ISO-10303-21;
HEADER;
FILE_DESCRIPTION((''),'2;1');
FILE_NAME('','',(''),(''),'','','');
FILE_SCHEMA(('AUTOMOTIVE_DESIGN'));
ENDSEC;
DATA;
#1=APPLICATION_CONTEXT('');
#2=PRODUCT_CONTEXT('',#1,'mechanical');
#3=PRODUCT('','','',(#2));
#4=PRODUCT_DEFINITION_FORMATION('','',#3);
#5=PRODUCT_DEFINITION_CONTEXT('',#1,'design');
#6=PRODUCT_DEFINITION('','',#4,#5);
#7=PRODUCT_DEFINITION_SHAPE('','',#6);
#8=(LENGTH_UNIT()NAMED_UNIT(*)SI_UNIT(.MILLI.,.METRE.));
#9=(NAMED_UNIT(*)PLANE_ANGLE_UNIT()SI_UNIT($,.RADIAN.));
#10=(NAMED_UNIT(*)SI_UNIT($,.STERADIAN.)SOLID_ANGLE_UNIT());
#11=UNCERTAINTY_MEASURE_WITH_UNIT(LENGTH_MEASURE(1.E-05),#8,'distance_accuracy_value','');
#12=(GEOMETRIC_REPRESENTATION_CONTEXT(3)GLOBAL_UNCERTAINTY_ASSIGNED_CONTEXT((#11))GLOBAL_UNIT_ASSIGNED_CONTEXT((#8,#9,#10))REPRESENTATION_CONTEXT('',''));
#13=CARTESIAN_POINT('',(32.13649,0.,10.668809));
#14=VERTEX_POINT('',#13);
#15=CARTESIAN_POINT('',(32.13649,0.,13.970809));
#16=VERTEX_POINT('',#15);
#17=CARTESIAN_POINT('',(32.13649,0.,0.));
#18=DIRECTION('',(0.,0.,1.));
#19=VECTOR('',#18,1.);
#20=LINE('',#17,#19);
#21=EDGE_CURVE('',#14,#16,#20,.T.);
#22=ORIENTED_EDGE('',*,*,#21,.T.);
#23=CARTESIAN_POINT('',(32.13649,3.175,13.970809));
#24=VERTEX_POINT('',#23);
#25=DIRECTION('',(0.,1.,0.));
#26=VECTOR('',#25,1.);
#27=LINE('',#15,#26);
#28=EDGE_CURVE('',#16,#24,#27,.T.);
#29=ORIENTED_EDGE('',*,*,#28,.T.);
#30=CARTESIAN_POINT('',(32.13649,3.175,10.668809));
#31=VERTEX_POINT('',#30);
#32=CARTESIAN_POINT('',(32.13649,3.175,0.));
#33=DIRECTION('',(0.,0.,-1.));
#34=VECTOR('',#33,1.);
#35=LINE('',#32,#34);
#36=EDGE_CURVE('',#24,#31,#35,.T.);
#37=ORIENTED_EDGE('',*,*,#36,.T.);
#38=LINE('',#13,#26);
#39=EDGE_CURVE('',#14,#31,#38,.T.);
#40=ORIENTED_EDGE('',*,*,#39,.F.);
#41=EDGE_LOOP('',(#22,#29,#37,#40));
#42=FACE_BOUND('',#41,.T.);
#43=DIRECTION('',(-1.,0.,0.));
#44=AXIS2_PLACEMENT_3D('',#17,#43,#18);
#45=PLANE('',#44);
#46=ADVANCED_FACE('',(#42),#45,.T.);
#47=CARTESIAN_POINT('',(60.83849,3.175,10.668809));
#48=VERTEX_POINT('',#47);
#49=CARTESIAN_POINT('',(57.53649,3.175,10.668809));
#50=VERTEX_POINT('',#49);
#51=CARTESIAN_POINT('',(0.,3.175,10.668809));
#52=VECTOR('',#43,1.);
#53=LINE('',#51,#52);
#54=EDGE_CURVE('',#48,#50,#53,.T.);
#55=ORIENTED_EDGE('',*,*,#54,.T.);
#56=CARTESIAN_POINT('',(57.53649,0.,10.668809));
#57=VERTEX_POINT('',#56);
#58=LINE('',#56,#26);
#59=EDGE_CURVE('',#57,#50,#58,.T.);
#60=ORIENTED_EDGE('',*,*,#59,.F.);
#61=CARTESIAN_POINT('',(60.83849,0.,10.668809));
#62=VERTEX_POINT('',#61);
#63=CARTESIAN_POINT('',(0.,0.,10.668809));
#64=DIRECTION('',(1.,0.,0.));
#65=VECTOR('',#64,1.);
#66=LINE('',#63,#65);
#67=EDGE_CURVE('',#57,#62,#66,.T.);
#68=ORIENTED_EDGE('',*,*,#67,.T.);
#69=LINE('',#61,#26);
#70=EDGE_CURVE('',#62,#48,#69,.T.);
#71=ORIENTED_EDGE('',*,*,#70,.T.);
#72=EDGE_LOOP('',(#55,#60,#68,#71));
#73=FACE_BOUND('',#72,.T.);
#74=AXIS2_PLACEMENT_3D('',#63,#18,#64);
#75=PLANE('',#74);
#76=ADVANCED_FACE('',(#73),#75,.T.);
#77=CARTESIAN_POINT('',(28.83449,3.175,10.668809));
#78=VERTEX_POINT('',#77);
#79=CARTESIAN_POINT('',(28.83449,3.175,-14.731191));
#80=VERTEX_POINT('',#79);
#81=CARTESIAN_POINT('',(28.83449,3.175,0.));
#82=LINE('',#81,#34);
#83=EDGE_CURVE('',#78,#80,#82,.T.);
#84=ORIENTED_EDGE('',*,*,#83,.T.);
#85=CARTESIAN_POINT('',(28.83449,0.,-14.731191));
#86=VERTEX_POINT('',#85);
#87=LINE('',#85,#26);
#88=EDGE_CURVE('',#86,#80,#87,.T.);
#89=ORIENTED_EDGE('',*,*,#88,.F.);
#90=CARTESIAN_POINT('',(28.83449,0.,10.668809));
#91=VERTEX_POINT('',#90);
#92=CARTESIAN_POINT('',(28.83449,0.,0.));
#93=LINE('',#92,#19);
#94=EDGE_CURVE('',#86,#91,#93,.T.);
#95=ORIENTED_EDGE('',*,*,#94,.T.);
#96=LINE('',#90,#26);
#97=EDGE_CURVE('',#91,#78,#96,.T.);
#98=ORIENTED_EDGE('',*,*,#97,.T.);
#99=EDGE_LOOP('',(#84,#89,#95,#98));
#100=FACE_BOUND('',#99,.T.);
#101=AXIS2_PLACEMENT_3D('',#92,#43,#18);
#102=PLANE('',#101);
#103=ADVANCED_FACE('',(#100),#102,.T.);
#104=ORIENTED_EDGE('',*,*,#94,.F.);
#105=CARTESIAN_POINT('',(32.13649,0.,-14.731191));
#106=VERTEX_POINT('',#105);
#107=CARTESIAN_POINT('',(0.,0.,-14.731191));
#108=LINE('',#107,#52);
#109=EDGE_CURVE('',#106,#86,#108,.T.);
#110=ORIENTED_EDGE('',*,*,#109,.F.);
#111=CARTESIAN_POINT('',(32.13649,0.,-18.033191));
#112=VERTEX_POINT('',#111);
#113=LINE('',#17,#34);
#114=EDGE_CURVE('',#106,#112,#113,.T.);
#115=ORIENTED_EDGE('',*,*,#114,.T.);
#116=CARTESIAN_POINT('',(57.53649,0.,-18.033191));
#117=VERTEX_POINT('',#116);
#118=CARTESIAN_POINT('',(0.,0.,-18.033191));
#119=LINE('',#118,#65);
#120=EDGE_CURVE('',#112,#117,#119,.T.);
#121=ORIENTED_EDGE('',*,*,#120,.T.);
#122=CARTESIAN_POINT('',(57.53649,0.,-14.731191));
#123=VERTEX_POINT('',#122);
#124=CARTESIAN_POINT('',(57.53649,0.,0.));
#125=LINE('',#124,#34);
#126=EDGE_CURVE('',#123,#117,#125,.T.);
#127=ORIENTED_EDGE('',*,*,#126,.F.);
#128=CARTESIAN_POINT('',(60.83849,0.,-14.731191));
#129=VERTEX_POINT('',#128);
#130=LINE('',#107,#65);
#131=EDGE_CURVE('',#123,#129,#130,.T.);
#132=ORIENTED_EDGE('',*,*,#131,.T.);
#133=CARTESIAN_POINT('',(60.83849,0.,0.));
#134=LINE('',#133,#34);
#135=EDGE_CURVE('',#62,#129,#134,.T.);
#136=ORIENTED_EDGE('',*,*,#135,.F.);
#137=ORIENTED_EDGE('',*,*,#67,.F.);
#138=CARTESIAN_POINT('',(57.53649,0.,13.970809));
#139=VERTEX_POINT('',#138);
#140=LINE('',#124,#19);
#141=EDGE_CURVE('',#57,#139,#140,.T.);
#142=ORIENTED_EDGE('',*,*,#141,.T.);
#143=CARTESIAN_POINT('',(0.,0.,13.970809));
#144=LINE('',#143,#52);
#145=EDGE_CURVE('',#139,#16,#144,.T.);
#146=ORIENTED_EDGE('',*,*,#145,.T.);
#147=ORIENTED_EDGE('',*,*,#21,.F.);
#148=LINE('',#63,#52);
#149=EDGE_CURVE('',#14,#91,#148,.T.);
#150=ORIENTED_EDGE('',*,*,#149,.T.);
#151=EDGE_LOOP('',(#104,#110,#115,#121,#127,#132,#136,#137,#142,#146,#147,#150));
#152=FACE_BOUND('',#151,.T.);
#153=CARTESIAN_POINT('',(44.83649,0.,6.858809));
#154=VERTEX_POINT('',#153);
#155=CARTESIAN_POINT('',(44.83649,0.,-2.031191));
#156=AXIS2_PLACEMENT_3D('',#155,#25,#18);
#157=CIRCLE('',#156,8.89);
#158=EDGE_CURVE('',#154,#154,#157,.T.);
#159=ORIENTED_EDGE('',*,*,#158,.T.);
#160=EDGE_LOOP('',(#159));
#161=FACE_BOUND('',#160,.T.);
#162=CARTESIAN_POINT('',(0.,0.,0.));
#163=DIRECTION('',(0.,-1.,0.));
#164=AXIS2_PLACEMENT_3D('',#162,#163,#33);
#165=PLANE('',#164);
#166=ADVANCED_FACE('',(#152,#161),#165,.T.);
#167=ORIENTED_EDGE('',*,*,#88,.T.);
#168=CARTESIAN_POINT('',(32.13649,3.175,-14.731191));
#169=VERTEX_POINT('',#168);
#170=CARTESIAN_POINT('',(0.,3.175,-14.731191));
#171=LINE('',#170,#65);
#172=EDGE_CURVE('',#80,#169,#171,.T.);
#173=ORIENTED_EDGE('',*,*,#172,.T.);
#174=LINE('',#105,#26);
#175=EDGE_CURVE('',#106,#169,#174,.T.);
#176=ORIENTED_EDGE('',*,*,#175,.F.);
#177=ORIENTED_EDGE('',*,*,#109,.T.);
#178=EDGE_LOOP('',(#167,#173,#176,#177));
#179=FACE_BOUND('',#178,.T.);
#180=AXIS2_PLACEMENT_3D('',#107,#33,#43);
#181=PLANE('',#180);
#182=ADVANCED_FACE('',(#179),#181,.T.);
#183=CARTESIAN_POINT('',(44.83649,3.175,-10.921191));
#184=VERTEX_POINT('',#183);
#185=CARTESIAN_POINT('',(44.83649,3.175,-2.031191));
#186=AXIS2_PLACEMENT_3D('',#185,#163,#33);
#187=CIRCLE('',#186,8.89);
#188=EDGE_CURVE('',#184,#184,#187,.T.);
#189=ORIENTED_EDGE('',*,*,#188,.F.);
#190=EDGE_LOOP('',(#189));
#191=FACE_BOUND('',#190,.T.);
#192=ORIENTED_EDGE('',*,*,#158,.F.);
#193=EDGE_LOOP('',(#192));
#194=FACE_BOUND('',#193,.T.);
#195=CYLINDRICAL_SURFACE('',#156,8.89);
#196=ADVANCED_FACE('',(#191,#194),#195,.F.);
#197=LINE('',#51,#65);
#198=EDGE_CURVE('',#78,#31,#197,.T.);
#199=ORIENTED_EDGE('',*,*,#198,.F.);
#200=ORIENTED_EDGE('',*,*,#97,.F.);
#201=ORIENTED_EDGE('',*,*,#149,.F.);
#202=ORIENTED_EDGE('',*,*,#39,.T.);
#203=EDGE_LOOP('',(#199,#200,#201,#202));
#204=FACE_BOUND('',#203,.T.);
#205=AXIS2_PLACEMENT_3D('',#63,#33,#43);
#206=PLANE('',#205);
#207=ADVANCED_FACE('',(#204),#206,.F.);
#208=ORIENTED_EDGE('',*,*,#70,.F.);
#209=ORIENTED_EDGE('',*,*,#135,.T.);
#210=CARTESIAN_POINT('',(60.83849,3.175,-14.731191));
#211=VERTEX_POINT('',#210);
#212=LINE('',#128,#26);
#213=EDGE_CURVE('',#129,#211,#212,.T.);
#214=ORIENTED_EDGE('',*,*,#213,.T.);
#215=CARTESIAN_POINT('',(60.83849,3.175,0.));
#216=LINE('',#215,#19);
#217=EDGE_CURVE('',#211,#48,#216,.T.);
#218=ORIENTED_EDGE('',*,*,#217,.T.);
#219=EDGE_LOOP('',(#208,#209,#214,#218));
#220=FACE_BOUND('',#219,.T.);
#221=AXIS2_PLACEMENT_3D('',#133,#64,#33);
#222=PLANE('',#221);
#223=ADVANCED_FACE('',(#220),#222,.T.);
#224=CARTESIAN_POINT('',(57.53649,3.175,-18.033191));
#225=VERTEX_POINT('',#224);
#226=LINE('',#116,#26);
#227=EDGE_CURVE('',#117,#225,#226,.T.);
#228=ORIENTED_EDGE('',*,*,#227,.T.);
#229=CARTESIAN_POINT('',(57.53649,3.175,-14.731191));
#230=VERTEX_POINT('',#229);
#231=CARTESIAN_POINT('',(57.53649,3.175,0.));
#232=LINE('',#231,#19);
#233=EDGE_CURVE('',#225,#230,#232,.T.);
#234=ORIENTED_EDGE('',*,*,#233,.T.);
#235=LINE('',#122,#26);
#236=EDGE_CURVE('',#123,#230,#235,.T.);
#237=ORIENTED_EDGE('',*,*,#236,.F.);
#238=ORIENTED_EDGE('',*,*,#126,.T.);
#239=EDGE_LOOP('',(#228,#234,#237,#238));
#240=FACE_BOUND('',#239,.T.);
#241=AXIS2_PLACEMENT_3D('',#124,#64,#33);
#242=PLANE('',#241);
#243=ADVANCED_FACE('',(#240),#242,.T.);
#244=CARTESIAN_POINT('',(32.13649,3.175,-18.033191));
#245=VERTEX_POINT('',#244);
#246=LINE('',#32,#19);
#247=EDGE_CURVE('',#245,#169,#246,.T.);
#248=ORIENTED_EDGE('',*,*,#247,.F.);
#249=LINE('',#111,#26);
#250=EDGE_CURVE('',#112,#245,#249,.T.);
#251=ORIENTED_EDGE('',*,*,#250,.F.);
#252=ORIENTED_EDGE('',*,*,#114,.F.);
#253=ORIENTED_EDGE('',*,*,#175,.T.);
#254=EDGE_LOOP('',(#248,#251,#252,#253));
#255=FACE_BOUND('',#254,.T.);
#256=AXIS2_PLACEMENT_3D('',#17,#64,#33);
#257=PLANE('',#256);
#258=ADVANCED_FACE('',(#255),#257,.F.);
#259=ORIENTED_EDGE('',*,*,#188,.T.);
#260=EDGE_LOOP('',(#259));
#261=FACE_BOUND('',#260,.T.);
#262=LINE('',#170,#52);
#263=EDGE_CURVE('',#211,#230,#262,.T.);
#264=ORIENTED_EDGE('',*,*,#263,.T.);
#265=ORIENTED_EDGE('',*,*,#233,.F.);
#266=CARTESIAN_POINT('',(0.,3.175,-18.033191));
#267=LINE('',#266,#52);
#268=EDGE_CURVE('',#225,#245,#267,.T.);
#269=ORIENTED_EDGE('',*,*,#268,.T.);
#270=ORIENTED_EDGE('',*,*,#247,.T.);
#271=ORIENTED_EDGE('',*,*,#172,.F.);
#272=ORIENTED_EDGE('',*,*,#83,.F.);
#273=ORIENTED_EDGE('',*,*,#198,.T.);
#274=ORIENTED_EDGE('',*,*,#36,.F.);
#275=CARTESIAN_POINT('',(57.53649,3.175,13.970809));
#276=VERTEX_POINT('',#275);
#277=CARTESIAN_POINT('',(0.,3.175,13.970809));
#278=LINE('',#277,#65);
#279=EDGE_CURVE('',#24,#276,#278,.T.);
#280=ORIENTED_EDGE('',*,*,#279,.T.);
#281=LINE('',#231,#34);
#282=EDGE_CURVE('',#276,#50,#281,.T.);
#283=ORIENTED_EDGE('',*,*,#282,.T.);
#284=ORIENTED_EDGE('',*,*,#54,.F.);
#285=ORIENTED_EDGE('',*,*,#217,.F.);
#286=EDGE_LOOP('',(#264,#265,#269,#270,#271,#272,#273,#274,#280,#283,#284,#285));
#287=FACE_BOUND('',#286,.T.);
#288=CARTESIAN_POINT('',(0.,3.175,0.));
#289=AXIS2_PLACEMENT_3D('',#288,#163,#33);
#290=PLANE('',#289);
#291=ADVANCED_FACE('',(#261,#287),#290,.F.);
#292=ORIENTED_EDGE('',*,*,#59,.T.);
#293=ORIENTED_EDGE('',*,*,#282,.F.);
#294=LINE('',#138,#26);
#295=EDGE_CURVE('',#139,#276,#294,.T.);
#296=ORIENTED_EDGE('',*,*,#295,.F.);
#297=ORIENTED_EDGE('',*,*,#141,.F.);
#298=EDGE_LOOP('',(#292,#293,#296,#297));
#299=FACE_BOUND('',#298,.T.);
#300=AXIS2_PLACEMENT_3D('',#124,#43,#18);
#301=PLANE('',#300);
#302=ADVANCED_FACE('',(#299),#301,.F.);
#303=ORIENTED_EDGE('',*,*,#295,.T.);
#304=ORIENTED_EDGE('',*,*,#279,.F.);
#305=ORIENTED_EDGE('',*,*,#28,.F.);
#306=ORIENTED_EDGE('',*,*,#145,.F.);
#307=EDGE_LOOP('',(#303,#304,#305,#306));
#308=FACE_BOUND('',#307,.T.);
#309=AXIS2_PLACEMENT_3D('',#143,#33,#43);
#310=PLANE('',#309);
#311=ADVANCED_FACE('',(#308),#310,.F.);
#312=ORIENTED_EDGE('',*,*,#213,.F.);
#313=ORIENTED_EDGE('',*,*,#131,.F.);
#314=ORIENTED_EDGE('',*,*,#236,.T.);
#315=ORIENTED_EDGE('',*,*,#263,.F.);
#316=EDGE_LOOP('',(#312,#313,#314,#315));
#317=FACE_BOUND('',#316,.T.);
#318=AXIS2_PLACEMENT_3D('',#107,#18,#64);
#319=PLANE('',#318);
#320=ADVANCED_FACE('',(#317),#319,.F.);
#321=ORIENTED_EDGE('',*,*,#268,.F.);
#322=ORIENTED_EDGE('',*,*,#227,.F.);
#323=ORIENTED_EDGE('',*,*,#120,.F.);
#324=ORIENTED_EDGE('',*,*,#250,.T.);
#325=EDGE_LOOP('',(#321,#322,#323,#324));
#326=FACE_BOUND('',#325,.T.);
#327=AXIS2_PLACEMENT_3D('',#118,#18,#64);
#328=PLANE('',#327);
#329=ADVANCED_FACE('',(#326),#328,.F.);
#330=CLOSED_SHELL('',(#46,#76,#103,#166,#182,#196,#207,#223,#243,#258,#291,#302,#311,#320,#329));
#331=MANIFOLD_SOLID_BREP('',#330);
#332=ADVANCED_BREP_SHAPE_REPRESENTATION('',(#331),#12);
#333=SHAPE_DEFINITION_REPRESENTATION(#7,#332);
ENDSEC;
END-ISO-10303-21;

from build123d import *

# Parameters (mm, degrees)
SKETCH2_W                    = 304.8
SKETCH2_H                    = 304.8
BOSS_EXTRUDE1_DEPTH          = 3.175
CUT_EXTRUDE1_DEPTH           = 348.408852067
CUT_EXTRUDE1_DEPTH_BACK      = 348.408852067
SKETCH3_W                    = 304.8
SKETCH3_H                    = 304.8
SKETCH3_R                    = 12.7
SKETCH3_R_2                  = 8.89
BODY_DELETE_KEEP_1_OUTLINE_R = 12.7
BODY_DELETE_KEEP_1_DEPTH     = 3.175


# Read off the part's stored shape, not the designer's step: Body-Delete/Keep 1
with BuildPart() as part:
    # Sketch2 → Boss-Extrude1 (new body)
    with BuildSketch(Plane(origin=(0, 0, 0), x_dir=(1, 0, 0), z_dir=(0, 1, 0))):
        with Locations((-56.763509666, -124.968808797)):
            Rectangle(SKETCH2_W, SKETCH2_H)
    extrude(amount=BOSS_EXTRUDE1_DEPTH)

    # Sketch3 → Cut-Extrude1 (cut, two sides: drawn at the far end of the back side and taken through both)
    # profile 1 of 3: a face of its own
    with BuildSketch(Plane(origin=(0, 3.175, 0), x_dir=(1, 0, 0), z_dir=(0, 1, 0)).offset(-CUT_EXTRUDE1_DEPTH_BACK)):
        with Locations((-56.763509666, -124.968808797)):
            Rectangle(SKETCH3_W, SKETCH3_H)
        Polygon((-188.253637726, -268.695366412), (-192.063637726, -268.695366412), (-192.063637726, -265.393366412), (-198.413637726, -265.393366412), (-188.253637726, -205.195366412), align=None, mode=Mode.SUBTRACT)
        Polygon((-185.713637726, -265.393366412), (-175.553637726, -205.195366412), (-175.553637726, -268.695366412), (-179.363637726, -268.695366412), (-179.363637726, -265.393366412), align=None, mode=Mode.SUBTRACT)
        Polygon((-162.853637726, -268.695366412), (-166.663637726, -268.695366412), (-166.663637726, -265.393366412), (-173.013637726, -265.393366412), (-162.853637726, -205.195366412), align=None, mode=Mode.SUBTRACT)
        Polygon((-150.153637726, -268.695366412), (-153.963637726, -268.695366412), (-153.963637726, -265.393366412), (-160.313637726, -265.393366412), (-150.153637726, -205.195366412), align=None, mode=Mode.SUBTRACT)
        Polygon((-147.613637726, -265.393366412), (-137.453637726, -205.195366412), (-137.453637726, -268.695366412), (-141.263637726, -268.695366412), (-141.263637726, -265.393366412), align=None, mode=Mode.SUBTRACT)
        Polygon((-128.563637726, -265.393366412), (-134.913637726, -265.393366412), (-124.753637726, -205.195366412), (-124.753637726, -268.695366412), (-128.563637726, -268.695366412), align=None, mode=Mode.SUBTRACT)
        Polygon((-122.213637726, -265.393366412), (-112.053637726, -205.195366412), (-112.053637726, -268.695366412), (-115.863637726, -268.695366412), (-115.863637726, -265.393366412), align=None, mode=Mode.SUBTRACT)
        Polygon((-99.353637726, -268.695366412), (-103.163637726, -268.695366412), (-103.163637726, -265.393366412), (-109.513637726, -265.393366412), (-99.353637726, -205.195366412), align=None, mode=Mode.SUBTRACT)
        Polygon((-90.463637726, -268.695366412), (-90.463637726, -265.393366412), (-96.813637726, -265.393366412), (-86.653637726, -205.195366412), (-86.653637726, -268.695366412), align=None, mode=Mode.SUBTRACT)
        Polygon((-84.113637726, -265.393366412), (-73.953637726, -205.195366412), (-73.953637726, -268.695366412), (-77.763637726, -268.695366412), (-77.763637726, -265.393366412), align=None, mode=Mode.SUBTRACT)
        Polygon((-71.413637726, -265.393366412), (-61.253637726, -205.195366412), (-61.253637726, -268.695366412), (-65.063637726, -268.695366412), (-65.063637726, -265.393366412), align=None, mode=Mode.SUBTRACT)
        with BuildLine():
            ThreePointArc((-132.963509666, -135.600090559), (-133.446874634, -138.030130355), (-134.823381605, -140.09021862))
            Line((-134.823381605, -140.09021862), (-188.253637726, -193.520474741))
            ThreePointArc((-188.253637726, -193.520474741), (-190.313725991, -194.896981712), (-192.743765787, -195.38034668))
            Line((-192.743765787, -195.38034668), (-196.463509666, -195.38034668))
            Line((-196.463509666, -195.38034668), (-196.463509666, -131.88034668))
            Line((-196.463509666, -131.88034668), (-132.963509666, -131.88034668))
            Line((-132.963509666, -131.88034668), (-132.963509666, -135.600090559))
        make_face(mode=Mode.SUBTRACT)
        with BuildLine():
            Line((-126.613509666, -195.38034668), (-126.613509666, -131.88034668))
            Line((-126.613509666, -131.88034668), (-63.113509666, -131.88034668))
            Line((-63.113509666, -131.88034668), (-63.113509666, -135.600090559))
            ThreePointArc((-63.113509666, -135.600090559), (-63.596874634, -138.030130355), (-64.973381605, -140.09021862))
            Line((-64.973381605, -140.09021862), (-118.403637726, -193.520474741))
            ThreePointArc((-118.403637726, -193.520474741), (-120.463725991, -194.896981712), (-122.893765787, -195.38034668))
            Line((-122.893765787, -195.38034668), (-126.613509666, -195.38034668))
        make_face(mode=Mode.SUBTRACT)
        Polygon((-52.363637726, -268.695366412), (-52.363637726, -265.393366412), (-58.713637726, -265.393366412), (-48.553637726, -205.195366412), (-48.553637726, -268.695366412), align=None, mode=Mode.SUBTRACT)
        Polygon((-35.853637726, -205.195366412), (-35.853637726, -268.695366412), (-39.663637726, -268.695366412), (-39.663637726, -265.393366412), (-46.013637726, -265.393366412), align=None, mode=Mode.SUBTRACT)
        Polygon((-23.153637726, -205.195366412), (-23.153637726, -268.695366412), (-26.963637726, -268.695366412), (-26.963637726, -265.393366412), (-33.313637726, -265.393366412), align=None, mode=Mode.SUBTRACT)
        Polygon((-20.613637726, -265.393366412), (-10.453637726, -205.195366412), (-10.453637726, -268.695366412), (-14.263637726, -268.695366412), (-14.263637726, -265.393366412), align=None, mode=Mode.SUBTRACT)
        Polygon((-1.563637726, -268.695366412), (-1.563637726, -265.393366412), (-7.913637726, -265.393366412), (2.246362274, -205.195366412), (2.246362274, -268.695366412), align=None, mode=Mode.SUBTRACT)
        with BuildLine():
            Line((-53.043765787, -195.38034668), (-56.763509666, -195.38034668))
            Line((-56.763509666, -195.38034668), (-56.763509666, -131.88034668))
            Line((-56.763509666, -131.88034668), (6.736490334, -131.88034668))
            Line((6.736490334, -131.88034668), (6.736490334, -135.600090559))
            ThreePointArc((6.736490334, -135.600090559), (6.253125366, -138.030130355), (4.876618395, -140.09021862))
            Line((4.876618395, -140.09021862), (-48.553637726, -193.520474741))
            ThreePointArc((-48.553637726, -193.520474741), (-50.613725991, -194.896981712), (-53.043765787, -195.38034668))
        make_face(mode=Mode.SUBTRACT)
        with BuildLine():
            Line((13.086490334, -131.88034668), (76.586490334, -131.88034668))
            Line((76.586490334, -131.88034668), (76.586490334, -135.600090559))
            ThreePointArc((76.586490334, -135.600090559), (76.103125366, -138.030130355), (74.726618395, -140.09021862))
            Line((74.726618395, -140.09021862), (21.296362274, -193.520474741))
            ThreePointArc((21.296362274, -193.520474741), (19.236274009, -194.896981712), (16.806234213, -195.38034668))
            Line((16.806234213, -195.38034668), (13.086490334, -195.38034668))
            Line((13.086490334, -195.38034668), (13.086490334, -131.88034668))
        make_face(mode=Mode.SUBTRACT)
        with BuildLine():
            Line((-196.463509666, -125.53034668), (-196.463509666, -62.03034668))
            Line((-196.463509666, -62.03034668), (-132.963509666, -62.03034668))
            Line((-132.963509666, -62.03034668), (-132.963509666, -65.750090559))
            ThreePointArc((-132.963509666, -65.750090559), (-133.10773728, -67.095783354), (-133.533868437, -68.38034668))
            ThreePointArc((-133.533868437, -68.38034668), (-134.095097913, -69.368194866), (-134.823381605, -70.24021862))
            Line((-134.823381605, -70.24021862), (-188.253637726, -123.670474741))
            ThreePointArc((-188.253637726, -123.670474741), (-189.12566148, -124.398758433), (-190.113509666, -124.959987909))
            ThreePointArc((-190.113509666, -124.959987909), (-191.398072992, -125.386119066), (-192.743765787, -125.53034668))
            Line((-192.743765787, -125.53034668), (-196.463509666, -125.53034668))
        make_face(mode=Mode.SUBTRACT)
        with BuildLine():
            Line((-122.893765787, -125.53034668), (-126.613509666, -125.53034668))
            Line((-126.613509666, -125.53034668), (-126.613509666, -62.03034668))
            Line((-126.613509666, -62.03034668), (-63.113509666, -62.03034668))
            Line((-63.113509666, -62.03034668), (-63.113509666, -65.750090559))
            ThreePointArc((-63.113509666, -65.750090559), (-63.596874634, -68.180130355), (-64.973381605, -70.24021862))
            Line((-64.973381605, -70.24021862), (-118.403637726, -123.670474741))
            ThreePointArc((-118.403637726, -123.670474741), (-120.463725991, -125.046981712), (-122.893765787, -125.53034668))
        make_face(mode=Mode.SUBTRACT)
        Polygon((-196.463509666, -48.768808797), (-196.463509666, 14.731191203), (-192.653509666, 14.731191203), (-192.653509666, 11.429191203), (-186.303509666, 11.429191203), align=None, mode=Mode.SUBTRACT)
        Polygon((-183.763509666, 14.731191203), (-179.953509666, 14.731191203), (-179.953509666, 11.429191203), (-173.603509666, 11.429191203), (-183.763509666, -48.768808797), align=None, mode=Mode.SUBTRACT)
        Polygon((-171.063509666, 14.731191203), (-167.253509666, 14.731191203), (-167.253509666, 11.429191203), (-160.903509666, 11.429191203), (-171.063509666, -48.768808797), align=None, mode=Mode.SUBTRACT)
        Polygon((-158.363509666, 14.731191203), (-154.553509666, 14.731191203), (-154.553509666, 11.429191203), (-148.203509666, 11.429191203), (-158.363509666, -48.768808797), align=None, mode=Mode.SUBTRACT)
        Polygon((-145.663509666, 14.731191203), (-141.853509666, 14.731191203), (-141.853509666, 11.429191203), (-135.503509666, 11.429191203), (-145.663509666, -48.768808797), align=None, mode=Mode.SUBTRACT)
        Polygon((-132.963509666, 14.731191203), (-129.153509666, 14.731191203), (-129.153509666, 11.429191203), (-122.803509666, 11.429191203), (-132.963509666, -48.768808797), align=None, mode=Mode.SUBTRACT)
        Polygon((-120.263509666, 14.731191203), (-116.453509666, 14.731191203), (-116.453509666, 11.429191203), (-110.103509666, 11.429191203), (-120.263509666, -48.768808797), align=None, mode=Mode.SUBTRACT)
        Polygon((-107.563509666, 14.731191203), (-103.753509666, 14.731191203), (-103.753509666, 11.429191203), (-97.403509666, 11.429191203), (-107.563509666, -48.768808797), align=None, mode=Mode.SUBTRACT)
        Polygon((-94.863509666, 14.731191203), (-91.053509666, 14.731191203), (-91.053509666, 11.429191203), (-84.703509666, 11.429191203), (-94.863509666, -48.768808797), align=None, mode=Mode.SUBTRACT)
        Polygon((-82.163509666, 14.731191203), (-78.353509666, 14.731191203), (-78.353509666, 11.429191203), (-72.003509666, 11.429191203), (-82.163509666, -48.768808797), align=None, mode=Mode.SUBTRACT)
        Polygon((-69.463509666, 14.731191203), (-65.653509666, 14.731191203), (-65.653509666, 11.429191203), (-59.303509666, 11.429191203), (-69.463509666, -48.768808797), align=None, mode=Mode.SUBTRACT)
        with BuildLine():
            Line((-53.043765787, -125.53034668), (-56.763509666, -125.53034668))
            Line((-56.763509666, -125.53034668), (-56.763509666, -62.03034668))
            Line((-56.763509666, -62.03034668), (6.736490334, -62.03034668))
            Line((6.736490334, -62.03034668), (6.736490334, -65.750090559))
            ThreePointArc((6.736490334, -65.750090559), (6.253125366, -68.180130355), (4.876618395, -70.24021862))
            Line((4.876618395, -70.24021862), (-48.553637726, -123.670474741))
            ThreePointArc((-48.553637726, -123.670474741), (-50.613725991, -125.046981712), (-53.043765787, -125.53034668))
        make_face(mode=Mode.SUBTRACT)
        with BuildLine():
            Line((16.806234213, -125.53034668), (13.086490334, -125.53034668))
            Line((13.086490334, -125.53034668), (13.086490334, -62.03034668))
            Line((13.086490334, -62.03034668), (76.586490334, -62.03034668))
            Line((76.586490334, -62.03034668), (76.586490334, -65.750090559))
            ThreePointArc((76.586490334, -65.750090559), (76.103125366, -68.180130355), (74.726618395, -70.24021862))
            Line((74.726618395, -70.24021862), (21.296362274, -123.670474741))
            ThreePointArc((21.296362274, -123.670474741), (19.236274009, -125.046981712), (16.806234213, -125.53034668))
        make_face(mode=Mode.SUBTRACT)
        Polygon((-56.763509666, 14.731191203), (-52.953509666, 14.731191203), (-52.953509666, 11.429191203), (-46.603509666, 11.429191203), (-56.763509666, -48.768808797), align=None, mode=Mode.SUBTRACT)
        Polygon((-44.063509666, 14.731191203), (-40.253509666, 14.731191203), (-40.253509666, 11.429191203), (-33.903509666, 11.429191203), (-44.063509666, -48.768808797), align=None, mode=Mode.SUBTRACT)
        Polygon((-31.363509666, 14.731191203), (-27.553509666, 14.731191203), (-27.553509666, 11.429191203), (-21.203509666, 11.429191203), (-31.363509666, -48.768808797), align=None, mode=Mode.SUBTRACT)
        Polygon((-18.663509666, 14.731191203), (-14.853509666, 14.731191203), (-14.853509666, 11.429191203), (-8.503509666, 11.429191203), (-18.663509666, -48.768808797), align=None, mode=Mode.SUBTRACT)
        Polygon((-5.963509666, 14.731191203), (-2.153509666, 14.731191203), (-2.153509666, 11.429191203), (4.196490334, 11.429191203), (-5.963509666, -48.768808797), align=None, mode=Mode.SUBTRACT)
        Polygon((57.536490334, -48.768808797), (57.536490334, -52.070808797), (32.136490334, -52.070808797), (32.136490334, -48.768808797), (28.834490334, -48.768808797), (28.834490334, -23.368808797), (32.136490334, -23.368808797), (32.136490334, -20.066808797), (57.536490334, -20.066808797), (57.536490334, -23.368808797), (60.838490334, -23.368808797), (60.838490334, -48.768808797), align=None, mode=Mode.SUBTRACT)
        Polygon((28.834490334, 14.731191203), (32.136490334, 14.731191203), (32.136490334, 18.033191203), (57.536490334, 18.033191203), (57.536490334, 14.731191203), (60.838490334, 14.731191203), (60.838490334, -10.668808797), (57.536490334, -10.668808797), (57.536490334, -13.970808797), (32.136490334, -13.970808797), (32.136490334, -10.668808797), (28.834490334, -10.668808797), align=None, mode=Mode.SUBTRACT)
    # profile 2 of 3: a face of its own
    with BuildSketch(Plane(origin=(0, 3.175, 0), x_dir=(1, 0, 0), z_dir=(0, 1, 0)).offset(-CUT_EXTRUDE1_DEPTH_BACK)):
        with Locations(Location((44.836490334, -36.068808797, 0), (0, 0, 270))):
            Circle(SKETCH3_R)
    # profile 3 of 3: a face of its own
    with BuildSketch(Plane(origin=(0, 3.175, 0), x_dir=(1, 0, 0), z_dir=(0, 1, 0)).offset(-CUT_EXTRUDE1_DEPTH_BACK)):
        with Locations(Location((44.836490334, 2.031191203, 0), (0, 0, 270))):
            Circle(SKETCH3_R_2)
    extrude(amount=CUT_EXTRUDE1_DEPTH + CUT_EXTRUDE1_DEPTH_BACK, mode=Mode.SUBTRACT)

    # Body-Delete/Keep 1 outline → Body-Delete/Keep 1 (cut)
    # profile 1 of 41: a face of its own
    with BuildSketch(Plane(origin=(0, 0, 0), x_dir=(1, 0, 0), z_dir=(0, 1, 0))):
        Polygon((60.838490334, -23.368808797), (57.536490334, -23.368808797), (57.536490334, -20.066808797), (32.136490334, -20.066808797), (32.136490334, -23.368808797), (28.834490334, -23.368808797), (28.834490334, -48.768808797), (32.136490334, -48.768808797), (32.136490334, -52.070808797), (57.536490334, -52.070808797), (57.536490334, -48.768808797), (60.838490334, -48.768808797), align=None)
        with Locations((44.836490334, -36.068808797)):
            Circle(BODY_DELETE_KEEP_1_OUTLINE_R, mode=Mode.SUBTRACT)
    # profile 2 of 41: a face of its own
    with BuildSketch(Plane(origin=(0, 0, 0), x_dir=(1, 0, 0), z_dir=(0, 1, 0))):
        Polygon((-192.653509666, 11.429191203), (-192.653509666, 14.731191203), (-196.463509666, 14.731191203), (-196.463509666, -48.768808797), (-186.303509666, 11.429191203), align=None)
    # profile 3 of 41: a face of its own
    with BuildSketch(Plane(origin=(0, 0, 0), x_dir=(1, 0, 0), z_dir=(0, 1, 0))):
        Polygon((-2.153509666, 11.429191203), (-2.153509666, 14.731191203), (-5.963509666, 14.731191203), (-5.963509666, -48.768808797), (4.196490334, 11.429191203), align=None)
    # profile 4 of 41: a face of its own
    with BuildSketch(Plane(origin=(0, 0, 0), x_dir=(1, 0, 0), z_dir=(0, 1, 0))):
        Polygon((-27.553509666, 11.429191203), (-27.553509666, 14.731191203), (-31.363509666, 14.731191203), (-31.363509666, -48.768808797), (-21.203509666, 11.429191203), align=None)
    # profile 5 of 41: a face of its own
    with BuildSketch(Plane(origin=(0, 0, 0), x_dir=(1, 0, 0), z_dir=(0, 1, 0))):
        Polygon((-14.853509666, 11.429191203), (-14.853509666, 14.731191203), (-18.663509666, 14.731191203), (-18.663509666, -48.768808797), (-8.503509666, 11.429191203), align=None)
    # profile 6 of 41: a face of its own
    with BuildSketch(Plane(origin=(0, 0, 0), x_dir=(1, 0, 0), z_dir=(0, 1, 0))):
        Polygon((-65.653509666, 11.429191203), (-65.653509666, 14.731191203), (-69.463509666, 14.731191203), (-69.463509666, -48.768808797), (-59.303509666, 11.429191203), align=None)
    # profile 7 of 41: a face of its own
    with BuildSketch(Plane(origin=(0, 0, 0), x_dir=(1, 0, 0), z_dir=(0, 1, 0))):
        Polygon((-91.053509666, 11.429191203), (-91.053509666, 14.731191203), (-94.863509666, 14.731191203), (-94.863509666, -48.768808797), (-84.703509666, 11.429191203), align=None)
    # profile 8 of 41: a face of its own
    with BuildSketch(Plane(origin=(0, 0, 0), x_dir=(1, 0, 0), z_dir=(0, 1, 0))):
        Polygon((-40.253509666, 11.429191203), (-40.253509666, 14.731191203), (-44.063509666, 14.731191203), (-44.063509666, -48.768808797), (-33.903509666, 11.429191203), align=None)
    # profile 9 of 41: a face of its own
    with BuildSketch(Plane(origin=(0, 0, 0), x_dir=(1, 0, 0), z_dir=(0, 1, 0))):
        Polygon((-52.953509666, 11.429191203), (-52.953509666, 14.731191203), (-56.763509666, 14.731191203), (-56.763509666, -48.768808797), (-46.603509666, 11.429191203), align=None)
    # profile 10 of 41: a face of its own
    with BuildSketch(Plane(origin=(0, 0, 0), x_dir=(1, 0, 0), z_dir=(0, 1, 0))):
        Polygon((-141.853509666, 11.429191203), (-141.853509666, 14.731191203), (-145.663509666, 14.731191203), (-145.663509666, -48.768808797), (-135.503509666, 11.429191203), align=None)
    # profile 11 of 41: a face of its own
    with BuildSketch(Plane(origin=(0, 0, 0), x_dir=(1, 0, 0), z_dir=(0, 1, 0))):
        Polygon((-154.553509666, 11.429191203), (-154.553509666, 14.731191203), (-158.363509666, 14.731191203), (-158.363509666, -48.768808797), (-148.203509666, 11.429191203), align=None)
    # profile 12 of 41: a face of its own
    with BuildSketch(Plane(origin=(0, 0, 0), x_dir=(1, 0, 0), z_dir=(0, 1, 0))):
        Polygon((-167.253509666, 11.429191203), (-167.253509666, 14.731191203), (-171.063509666, 14.731191203), (-171.063509666, -48.768808797), (-160.903509666, 11.429191203), align=None)
    # profile 13 of 41: a face of its own
    with BuildSketch(Plane(origin=(0, 0, 0), x_dir=(1, 0, 0), z_dir=(0, 1, 0))):
        Polygon((-78.353509666, 11.429191203), (-78.353509666, 14.731191203), (-82.163509666, 14.731191203), (-82.163509666, -48.768808797), (-72.003509666, 11.429191203), align=None)
    # profile 14 of 41: a face of its own
    with BuildSketch(Plane(origin=(0, 0, 0), x_dir=(1, 0, 0), z_dir=(0, 1, 0))):
        Polygon((-179.953509666, 11.429191203), (-179.953509666, 14.731191203), (-183.763509666, 14.731191203), (-183.763509666, -48.768808797), (-173.603509666, 11.429191203), align=None)
    # profile 15 of 41: a face of its own
    with BuildSketch(Plane(origin=(0, 0, 0), x_dir=(1, 0, 0), z_dir=(0, 1, 0))):
        Polygon((-103.753509666, 11.429191203), (-103.753509666, 14.731191203), (-107.563509666, 14.731191203), (-107.563509666, -48.768808797), (-97.403509666, 11.429191203), align=None)
    # profile 16 of 41: a face of its own
    with BuildSketch(Plane(origin=(0, 0, 0), x_dir=(1, 0, 0), z_dir=(0, 1, 0))):
        Polygon((-116.453509666, 11.429191203), (-116.453509666, 14.731191203), (-120.263509666, 14.731191203), (-120.263509666, -48.768808797), (-110.103509666, 11.429191203), align=None)
    # profile 17 of 41: a face of its own
    with BuildSketch(Plane(origin=(0, 0, 0), x_dir=(1, 0, 0), z_dir=(0, 1, 0))):
        Polygon((-129.153509666, 11.429191203), (-129.153509666, 14.731191203), (-132.963509666, 14.731191203), (-132.963509666, -48.768808797), (-122.803509666, 11.429191203), align=None)
    # profile 18 of 41: a face of its own
    with BuildSketch(Plane(origin=(0, 0, 0), x_dir=(1, 0, 0), z_dir=(0, 1, 0))):
        Polygon((-71.413637726, -265.393366412), (-65.063637726, -265.393366412), (-65.063637726, -268.695366412), (-61.253637726, -268.695366412), (-61.253637726, -205.195366412), align=None)
    # profile 19 of 41: a face of its own
    with BuildSketch(Plane(origin=(0, 0, 0), x_dir=(1, 0, 0), z_dir=(0, 1, 0))):
        Polygon((-124.753637726, -205.195366412), (-134.913637726, -265.393366412), (-128.563637726, -265.393366412), (-128.563637726, -268.695366412), (-124.753637726, -268.695366412), align=None)
    # profile 20 of 41: a face of its own
    with BuildSketch(Plane(origin=(0, 0, 0), x_dir=(1, 0, 0), z_dir=(0, 1, 0))):
        Polygon((-23.153637726, -205.195366412), (-33.313637726, -265.393366412), (-26.963637726, -265.393366412), (-26.963637726, -268.695366412), (-23.153637726, -268.695366412), align=None)
    # profile 21 of 41: a face of its own
    with BuildSketch(Plane(origin=(0, 0, 0), x_dir=(1, 0, 0), z_dir=(0, 1, 0))):
        Polygon((-35.853637726, -205.195366412), (-46.013637726, -265.393366412), (-39.663637726, -265.393366412), (-39.663637726, -268.695366412), (-35.853637726, -268.695366412), align=None)
    # profile 22 of 41: a face of its own
    with BuildSketch(Plane(origin=(0, 0, 0), x_dir=(1, 0, 0), z_dir=(0, 1, 0))):
        Polygon((-73.953637726, -205.195366412), (-84.113637726, -265.393366412), (-77.763637726, -265.393366412), (-77.763637726, -268.695366412), (-73.953637726, -268.695366412), align=None)
    # profile 23 of 41: a face of its own
    with BuildSketch(Plane(origin=(0, 0, 0), x_dir=(1, 0, 0), z_dir=(0, 1, 0))):
        Polygon((-162.853637726, -205.195366412), (-173.013637726, -265.393366412), (-166.663637726, -265.393366412), (-166.663637726, -268.695366412), (-162.853637726, -268.695366412), align=None)
    # profile 24 of 41: a face of its own
    with BuildSketch(Plane(origin=(0, 0, 0), x_dir=(1, 0, 0), z_dir=(0, 1, 0))):
        Polygon((-188.253637726, -205.195366412), (-198.413637726, -265.393366412), (-192.063637726, -265.393366412), (-192.063637726, -268.695366412), (-188.253637726, -268.695366412), align=None)
    # profile 25 of 41: a face of its own
    with BuildSketch(Plane(origin=(0, 0, 0), x_dir=(1, 0, 0), z_dir=(0, 1, 0))):
        Polygon((-175.553637726, -205.195366412), (-185.713637726, -265.393366412), (-179.363637726, -265.393366412), (-179.363637726, -268.695366412), (-175.553637726, -268.695366412), align=None)
    # profile 26 of 41: a face of its own
    with BuildSketch(Plane(origin=(0, 0, 0), x_dir=(1, 0, 0), z_dir=(0, 1, 0))):
        Polygon((-150.153637726, -205.195366412), (-160.313637726, -265.393366412), (-153.963637726, -265.393366412), (-153.963637726, -268.695366412), (-150.153637726, -268.695366412), align=None)
    # profile 27 of 41: a face of its own
    with BuildSketch(Plane(origin=(0, 0, 0), x_dir=(1, 0, 0), z_dir=(0, 1, 0))):
        Polygon((-86.653637726, -205.195366412), (-96.813637726, -265.393366412), (-90.463637726, -265.393366412), (-90.463637726, -268.695366412), (-86.653637726, -268.695366412), align=None)
    # profile 28 of 41: a face of its own
    with BuildSketch(Plane(origin=(0, 0, 0), x_dir=(1, 0, 0), z_dir=(0, 1, 0))):
        Polygon((2.246362274, -205.195366412), (-7.913637726, -265.393366412), (-1.563637726, -265.393366412), (-1.563637726, -268.695366412), (2.246362274, -268.695366412), align=None)
    # profile 29 of 41: a face of its own
    with BuildSketch(Plane(origin=(0, 0, 0), x_dir=(1, 0, 0), z_dir=(0, 1, 0))):
        Polygon((-137.453637726, -205.195366412), (-147.613637726, -265.393366412), (-141.263637726, -265.393366412), (-141.263637726, -268.695366412), (-137.453637726, -268.695366412), align=None)
    # profile 30 of 41: a face of its own
    with BuildSketch(Plane(origin=(0, 0, 0), x_dir=(1, 0, 0), z_dir=(0, 1, 0))):
        Polygon((-48.553637726, -205.195366412), (-58.713637726, -265.393366412), (-52.363637726, -265.393366412), (-52.363637726, -268.695366412), (-48.553637726, -268.695366412), align=None)
    # profile 31 of 41: a face of its own
    with BuildSketch(Plane(origin=(0, 0, 0), x_dir=(1, 0, 0), z_dir=(0, 1, 0))):
        Polygon((-10.453637726, -205.195366412), (-20.613637726, -265.393366412), (-14.263637726, -265.393366412), (-14.263637726, -268.695366412), (-10.453637726, -268.695366412), align=None)
    # profile 32 of 41: a face of its own
    with BuildSketch(Plane(origin=(0, 0, 0), x_dir=(1, 0, 0), z_dir=(0, 1, 0))):
        Polygon((-99.353637726, -205.195366412), (-109.513637726, -265.393366412), (-103.163637726, -265.393366412), (-103.163637726, -268.695366412), (-99.353637726, -268.695366412), align=None)
    # profile 33 of 41: a face of its own
    with BuildSketch(Plane(origin=(0, 0, 0), x_dir=(1, 0, 0), z_dir=(0, 1, 0))):
        Polygon((-112.053637726, -205.195366412), (-122.213637726, -265.393366412), (-115.863637726, -265.393366412), (-115.863637726, -268.695366412), (-112.053637726, -268.695366412), align=None)
    # profile 34 of 41: a face of its own
    with BuildSketch(Plane(origin=(0, 0, 0), x_dir=(1, 0, 0), z_dir=(0, 1, 0))):
        with BuildLine():
            Line((-132.963509666, -62.03034668), (-196.463509666, -62.03034668))
            Line((-196.463509666, -62.03034668), (-196.463509666, -125.53034668))
            Line((-196.463509666, -125.53034668), (-192.743765787, -125.53034668))
            ThreePointArc((-192.743765787, -125.53034668), (-190.313725991, -125.046981712), (-188.253637726, -123.670474741))
            Line((-188.253637726, -123.670474741), (-134.823381605, -70.24021862))
            ThreePointArc((-134.823381605, -70.24021862), (-133.446874634, -68.180130355), (-132.963509666, -65.750090559))
            Line((-132.963509666, -65.750090559), (-132.963509666, -62.03034668))
        make_face()
    # profile 35 of 41: a face of its own
    with BuildSketch(Plane(origin=(0, 0, 0), x_dir=(1, 0, 0), z_dir=(0, 1, 0))):
        with BuildLine():
            Line((-132.963509666, -131.88034668), (-196.463509666, -131.88034668))
            Line((-196.463509666, -131.88034668), (-196.463509666, -195.38034668))
            Line((-196.463509666, -195.38034668), (-192.743765787, -195.38034668))
            ThreePointArc((-192.743765787, -195.38034668), (-190.313725991, -194.896981712), (-188.253637726, -193.520474741))
            Line((-188.253637726, -193.520474741), (-134.823381605, -140.09021862))
            ThreePointArc((-134.823381605, -140.09021862), (-133.446874634, -138.030130355), (-132.963509666, -135.600090559))
            Line((-132.963509666, -135.600090559), (-132.963509666, -131.88034668))
        make_face()
    # profile 36 of 41: a face of its own
    with BuildSketch(Plane(origin=(0, 0, 0), x_dir=(1, 0, 0), z_dir=(0, 1, 0))):
        with BuildLine():
            Line((6.736490334, -131.88034668), (-56.763509666, -131.88034668))
            Line((-56.763509666, -131.88034668), (-56.763509666, -195.38034668))
            Line((-56.763509666, -195.38034668), (-53.043765787, -195.38034668))
            ThreePointArc((-53.043765787, -195.38034668), (-50.613725991, -194.896981712), (-48.553637726, -193.520474741))
            Line((-48.553637726, -193.520474741), (4.876618395, -140.09021862))
            ThreePointArc((4.876618395, -140.09021862), (6.253125366, -138.030130355), (6.736490334, -135.600090559))
            Line((6.736490334, -135.600090559), (6.736490334, -131.88034668))
        make_face()
    # profile 37 of 41: a face of its own
    with BuildSketch(Plane(origin=(0, 0, 0), x_dir=(1, 0, 0), z_dir=(0, 1, 0))):
        with BuildLine():
            Line((6.736490334, -62.03034668), (-56.763509666, -62.03034668))
            Line((-56.763509666, -62.03034668), (-56.763509666, -125.53034668))
            Line((-56.763509666, -125.53034668), (-53.043765787, -125.53034668))
            ThreePointArc((-53.043765787, -125.53034668), (-50.613725991, -125.046981712), (-48.553637726, -123.670474741))
            Line((-48.553637726, -123.670474741), (4.876618395, -70.24021862))
            ThreePointArc((4.876618395, -70.24021862), (6.253125366, -68.180130355), (6.736490334, -65.750090559))
            Line((6.736490334, -65.750090559), (6.736490334, -62.03034668))
        make_face()
    # profile 38 of 41: a face of its own
    with BuildSketch(Plane(origin=(0, 0, 0), x_dir=(1, 0, 0), z_dir=(0, 1, 0))):
        with BuildLine():
            Line((21.296362274, -193.520474741), (74.726618395, -140.09021862))
            ThreePointArc((74.726618395, -140.09021862), (76.103125366, -138.030130355), (76.586490334, -135.600090559))
            Line((76.586490334, -135.600090559), (76.586490334, -131.88034668))
            Line((76.586490334, -131.88034668), (13.086490334, -131.88034668))
            Line((13.086490334, -131.88034668), (13.086490334, -195.38034668))
            Line((13.086490334, -195.38034668), (16.806234213, -195.38034668))
            ThreePointArc((16.806234213, -195.38034668), (19.236274009, -194.896981712), (21.296362274, -193.520474741))
        make_face()
    # profile 39 of 41: a face of its own
    with BuildSketch(Plane(origin=(0, 0, 0), x_dir=(1, 0, 0), z_dir=(0, 1, 0))):
        with BuildLine():
            Line((-126.613509666, -131.88034668), (-126.613509666, -195.38034668))
            Line((-126.613509666, -195.38034668), (-122.893765787, -195.38034668))
            ThreePointArc((-122.893765787, -195.38034668), (-120.463725991, -194.896981712), (-118.403637726, -193.520474741))
            Line((-118.403637726, -193.520474741), (-64.973381605, -140.09021862))
            ThreePointArc((-64.973381605, -140.09021862), (-63.596874634, -138.030130355), (-63.113509666, -135.600090559))
            Line((-63.113509666, -135.600090559), (-63.113509666, -131.88034668))
            Line((-63.113509666, -131.88034668), (-126.613509666, -131.88034668))
        make_face()
    # profile 40 of 41: a face of its own
    with BuildSketch(Plane(origin=(0, 0, 0), x_dir=(1, 0, 0), z_dir=(0, 1, 0))):
        with BuildLine():
            Line((76.586490334, -62.03034668), (13.086490334, -62.03034668))
            Line((13.086490334, -62.03034668), (13.086490334, -125.53034668))
            Line((13.086490334, -125.53034668), (16.806234213, -125.53034668))
            ThreePointArc((16.806234213, -125.53034668), (19.236274009, -125.046981712), (21.296362274, -123.670474741))
            Line((21.296362274, -123.670474741), (74.726618395, -70.24021862))
            ThreePointArc((74.726618395, -70.24021862), (76.103125366, -68.180130355), (76.586490334, -65.750090559))
            Line((76.586490334, -65.750090559), (76.586490334, -62.03034668))
        make_face()
    # profile 41 of 41: a face of its own
    with BuildSketch(Plane(origin=(0, 0, 0), x_dir=(1, 0, 0), z_dir=(0, 1, 0))):
        with BuildLine():
            Line((-126.613509666, -62.03034668), (-126.613509666, -125.53034668))
            Line((-126.613509666, -125.53034668), (-122.893765787, -125.53034668))
            ThreePointArc((-122.893765787, -125.53034668), (-120.463725991, -125.046981712), (-118.403637726, -123.670474741))
            Line((-118.403637726, -123.670474741), (-64.973381605, -70.24021862))
            ThreePointArc((-64.973381605, -70.24021862), (-63.596874634, -68.180130355), (-63.113509666, -65.750090559))
            Line((-63.113509666, -65.750090559), (-63.113509666, -62.03034668))
            Line((-63.113509666, -62.03034668), (-126.613509666, -62.03034668))
        make_face()
    extrude(amount=BODY_DELETE_KEEP_1_DEPTH, mode=Mode.SUBTRACT)


solid = part.part
